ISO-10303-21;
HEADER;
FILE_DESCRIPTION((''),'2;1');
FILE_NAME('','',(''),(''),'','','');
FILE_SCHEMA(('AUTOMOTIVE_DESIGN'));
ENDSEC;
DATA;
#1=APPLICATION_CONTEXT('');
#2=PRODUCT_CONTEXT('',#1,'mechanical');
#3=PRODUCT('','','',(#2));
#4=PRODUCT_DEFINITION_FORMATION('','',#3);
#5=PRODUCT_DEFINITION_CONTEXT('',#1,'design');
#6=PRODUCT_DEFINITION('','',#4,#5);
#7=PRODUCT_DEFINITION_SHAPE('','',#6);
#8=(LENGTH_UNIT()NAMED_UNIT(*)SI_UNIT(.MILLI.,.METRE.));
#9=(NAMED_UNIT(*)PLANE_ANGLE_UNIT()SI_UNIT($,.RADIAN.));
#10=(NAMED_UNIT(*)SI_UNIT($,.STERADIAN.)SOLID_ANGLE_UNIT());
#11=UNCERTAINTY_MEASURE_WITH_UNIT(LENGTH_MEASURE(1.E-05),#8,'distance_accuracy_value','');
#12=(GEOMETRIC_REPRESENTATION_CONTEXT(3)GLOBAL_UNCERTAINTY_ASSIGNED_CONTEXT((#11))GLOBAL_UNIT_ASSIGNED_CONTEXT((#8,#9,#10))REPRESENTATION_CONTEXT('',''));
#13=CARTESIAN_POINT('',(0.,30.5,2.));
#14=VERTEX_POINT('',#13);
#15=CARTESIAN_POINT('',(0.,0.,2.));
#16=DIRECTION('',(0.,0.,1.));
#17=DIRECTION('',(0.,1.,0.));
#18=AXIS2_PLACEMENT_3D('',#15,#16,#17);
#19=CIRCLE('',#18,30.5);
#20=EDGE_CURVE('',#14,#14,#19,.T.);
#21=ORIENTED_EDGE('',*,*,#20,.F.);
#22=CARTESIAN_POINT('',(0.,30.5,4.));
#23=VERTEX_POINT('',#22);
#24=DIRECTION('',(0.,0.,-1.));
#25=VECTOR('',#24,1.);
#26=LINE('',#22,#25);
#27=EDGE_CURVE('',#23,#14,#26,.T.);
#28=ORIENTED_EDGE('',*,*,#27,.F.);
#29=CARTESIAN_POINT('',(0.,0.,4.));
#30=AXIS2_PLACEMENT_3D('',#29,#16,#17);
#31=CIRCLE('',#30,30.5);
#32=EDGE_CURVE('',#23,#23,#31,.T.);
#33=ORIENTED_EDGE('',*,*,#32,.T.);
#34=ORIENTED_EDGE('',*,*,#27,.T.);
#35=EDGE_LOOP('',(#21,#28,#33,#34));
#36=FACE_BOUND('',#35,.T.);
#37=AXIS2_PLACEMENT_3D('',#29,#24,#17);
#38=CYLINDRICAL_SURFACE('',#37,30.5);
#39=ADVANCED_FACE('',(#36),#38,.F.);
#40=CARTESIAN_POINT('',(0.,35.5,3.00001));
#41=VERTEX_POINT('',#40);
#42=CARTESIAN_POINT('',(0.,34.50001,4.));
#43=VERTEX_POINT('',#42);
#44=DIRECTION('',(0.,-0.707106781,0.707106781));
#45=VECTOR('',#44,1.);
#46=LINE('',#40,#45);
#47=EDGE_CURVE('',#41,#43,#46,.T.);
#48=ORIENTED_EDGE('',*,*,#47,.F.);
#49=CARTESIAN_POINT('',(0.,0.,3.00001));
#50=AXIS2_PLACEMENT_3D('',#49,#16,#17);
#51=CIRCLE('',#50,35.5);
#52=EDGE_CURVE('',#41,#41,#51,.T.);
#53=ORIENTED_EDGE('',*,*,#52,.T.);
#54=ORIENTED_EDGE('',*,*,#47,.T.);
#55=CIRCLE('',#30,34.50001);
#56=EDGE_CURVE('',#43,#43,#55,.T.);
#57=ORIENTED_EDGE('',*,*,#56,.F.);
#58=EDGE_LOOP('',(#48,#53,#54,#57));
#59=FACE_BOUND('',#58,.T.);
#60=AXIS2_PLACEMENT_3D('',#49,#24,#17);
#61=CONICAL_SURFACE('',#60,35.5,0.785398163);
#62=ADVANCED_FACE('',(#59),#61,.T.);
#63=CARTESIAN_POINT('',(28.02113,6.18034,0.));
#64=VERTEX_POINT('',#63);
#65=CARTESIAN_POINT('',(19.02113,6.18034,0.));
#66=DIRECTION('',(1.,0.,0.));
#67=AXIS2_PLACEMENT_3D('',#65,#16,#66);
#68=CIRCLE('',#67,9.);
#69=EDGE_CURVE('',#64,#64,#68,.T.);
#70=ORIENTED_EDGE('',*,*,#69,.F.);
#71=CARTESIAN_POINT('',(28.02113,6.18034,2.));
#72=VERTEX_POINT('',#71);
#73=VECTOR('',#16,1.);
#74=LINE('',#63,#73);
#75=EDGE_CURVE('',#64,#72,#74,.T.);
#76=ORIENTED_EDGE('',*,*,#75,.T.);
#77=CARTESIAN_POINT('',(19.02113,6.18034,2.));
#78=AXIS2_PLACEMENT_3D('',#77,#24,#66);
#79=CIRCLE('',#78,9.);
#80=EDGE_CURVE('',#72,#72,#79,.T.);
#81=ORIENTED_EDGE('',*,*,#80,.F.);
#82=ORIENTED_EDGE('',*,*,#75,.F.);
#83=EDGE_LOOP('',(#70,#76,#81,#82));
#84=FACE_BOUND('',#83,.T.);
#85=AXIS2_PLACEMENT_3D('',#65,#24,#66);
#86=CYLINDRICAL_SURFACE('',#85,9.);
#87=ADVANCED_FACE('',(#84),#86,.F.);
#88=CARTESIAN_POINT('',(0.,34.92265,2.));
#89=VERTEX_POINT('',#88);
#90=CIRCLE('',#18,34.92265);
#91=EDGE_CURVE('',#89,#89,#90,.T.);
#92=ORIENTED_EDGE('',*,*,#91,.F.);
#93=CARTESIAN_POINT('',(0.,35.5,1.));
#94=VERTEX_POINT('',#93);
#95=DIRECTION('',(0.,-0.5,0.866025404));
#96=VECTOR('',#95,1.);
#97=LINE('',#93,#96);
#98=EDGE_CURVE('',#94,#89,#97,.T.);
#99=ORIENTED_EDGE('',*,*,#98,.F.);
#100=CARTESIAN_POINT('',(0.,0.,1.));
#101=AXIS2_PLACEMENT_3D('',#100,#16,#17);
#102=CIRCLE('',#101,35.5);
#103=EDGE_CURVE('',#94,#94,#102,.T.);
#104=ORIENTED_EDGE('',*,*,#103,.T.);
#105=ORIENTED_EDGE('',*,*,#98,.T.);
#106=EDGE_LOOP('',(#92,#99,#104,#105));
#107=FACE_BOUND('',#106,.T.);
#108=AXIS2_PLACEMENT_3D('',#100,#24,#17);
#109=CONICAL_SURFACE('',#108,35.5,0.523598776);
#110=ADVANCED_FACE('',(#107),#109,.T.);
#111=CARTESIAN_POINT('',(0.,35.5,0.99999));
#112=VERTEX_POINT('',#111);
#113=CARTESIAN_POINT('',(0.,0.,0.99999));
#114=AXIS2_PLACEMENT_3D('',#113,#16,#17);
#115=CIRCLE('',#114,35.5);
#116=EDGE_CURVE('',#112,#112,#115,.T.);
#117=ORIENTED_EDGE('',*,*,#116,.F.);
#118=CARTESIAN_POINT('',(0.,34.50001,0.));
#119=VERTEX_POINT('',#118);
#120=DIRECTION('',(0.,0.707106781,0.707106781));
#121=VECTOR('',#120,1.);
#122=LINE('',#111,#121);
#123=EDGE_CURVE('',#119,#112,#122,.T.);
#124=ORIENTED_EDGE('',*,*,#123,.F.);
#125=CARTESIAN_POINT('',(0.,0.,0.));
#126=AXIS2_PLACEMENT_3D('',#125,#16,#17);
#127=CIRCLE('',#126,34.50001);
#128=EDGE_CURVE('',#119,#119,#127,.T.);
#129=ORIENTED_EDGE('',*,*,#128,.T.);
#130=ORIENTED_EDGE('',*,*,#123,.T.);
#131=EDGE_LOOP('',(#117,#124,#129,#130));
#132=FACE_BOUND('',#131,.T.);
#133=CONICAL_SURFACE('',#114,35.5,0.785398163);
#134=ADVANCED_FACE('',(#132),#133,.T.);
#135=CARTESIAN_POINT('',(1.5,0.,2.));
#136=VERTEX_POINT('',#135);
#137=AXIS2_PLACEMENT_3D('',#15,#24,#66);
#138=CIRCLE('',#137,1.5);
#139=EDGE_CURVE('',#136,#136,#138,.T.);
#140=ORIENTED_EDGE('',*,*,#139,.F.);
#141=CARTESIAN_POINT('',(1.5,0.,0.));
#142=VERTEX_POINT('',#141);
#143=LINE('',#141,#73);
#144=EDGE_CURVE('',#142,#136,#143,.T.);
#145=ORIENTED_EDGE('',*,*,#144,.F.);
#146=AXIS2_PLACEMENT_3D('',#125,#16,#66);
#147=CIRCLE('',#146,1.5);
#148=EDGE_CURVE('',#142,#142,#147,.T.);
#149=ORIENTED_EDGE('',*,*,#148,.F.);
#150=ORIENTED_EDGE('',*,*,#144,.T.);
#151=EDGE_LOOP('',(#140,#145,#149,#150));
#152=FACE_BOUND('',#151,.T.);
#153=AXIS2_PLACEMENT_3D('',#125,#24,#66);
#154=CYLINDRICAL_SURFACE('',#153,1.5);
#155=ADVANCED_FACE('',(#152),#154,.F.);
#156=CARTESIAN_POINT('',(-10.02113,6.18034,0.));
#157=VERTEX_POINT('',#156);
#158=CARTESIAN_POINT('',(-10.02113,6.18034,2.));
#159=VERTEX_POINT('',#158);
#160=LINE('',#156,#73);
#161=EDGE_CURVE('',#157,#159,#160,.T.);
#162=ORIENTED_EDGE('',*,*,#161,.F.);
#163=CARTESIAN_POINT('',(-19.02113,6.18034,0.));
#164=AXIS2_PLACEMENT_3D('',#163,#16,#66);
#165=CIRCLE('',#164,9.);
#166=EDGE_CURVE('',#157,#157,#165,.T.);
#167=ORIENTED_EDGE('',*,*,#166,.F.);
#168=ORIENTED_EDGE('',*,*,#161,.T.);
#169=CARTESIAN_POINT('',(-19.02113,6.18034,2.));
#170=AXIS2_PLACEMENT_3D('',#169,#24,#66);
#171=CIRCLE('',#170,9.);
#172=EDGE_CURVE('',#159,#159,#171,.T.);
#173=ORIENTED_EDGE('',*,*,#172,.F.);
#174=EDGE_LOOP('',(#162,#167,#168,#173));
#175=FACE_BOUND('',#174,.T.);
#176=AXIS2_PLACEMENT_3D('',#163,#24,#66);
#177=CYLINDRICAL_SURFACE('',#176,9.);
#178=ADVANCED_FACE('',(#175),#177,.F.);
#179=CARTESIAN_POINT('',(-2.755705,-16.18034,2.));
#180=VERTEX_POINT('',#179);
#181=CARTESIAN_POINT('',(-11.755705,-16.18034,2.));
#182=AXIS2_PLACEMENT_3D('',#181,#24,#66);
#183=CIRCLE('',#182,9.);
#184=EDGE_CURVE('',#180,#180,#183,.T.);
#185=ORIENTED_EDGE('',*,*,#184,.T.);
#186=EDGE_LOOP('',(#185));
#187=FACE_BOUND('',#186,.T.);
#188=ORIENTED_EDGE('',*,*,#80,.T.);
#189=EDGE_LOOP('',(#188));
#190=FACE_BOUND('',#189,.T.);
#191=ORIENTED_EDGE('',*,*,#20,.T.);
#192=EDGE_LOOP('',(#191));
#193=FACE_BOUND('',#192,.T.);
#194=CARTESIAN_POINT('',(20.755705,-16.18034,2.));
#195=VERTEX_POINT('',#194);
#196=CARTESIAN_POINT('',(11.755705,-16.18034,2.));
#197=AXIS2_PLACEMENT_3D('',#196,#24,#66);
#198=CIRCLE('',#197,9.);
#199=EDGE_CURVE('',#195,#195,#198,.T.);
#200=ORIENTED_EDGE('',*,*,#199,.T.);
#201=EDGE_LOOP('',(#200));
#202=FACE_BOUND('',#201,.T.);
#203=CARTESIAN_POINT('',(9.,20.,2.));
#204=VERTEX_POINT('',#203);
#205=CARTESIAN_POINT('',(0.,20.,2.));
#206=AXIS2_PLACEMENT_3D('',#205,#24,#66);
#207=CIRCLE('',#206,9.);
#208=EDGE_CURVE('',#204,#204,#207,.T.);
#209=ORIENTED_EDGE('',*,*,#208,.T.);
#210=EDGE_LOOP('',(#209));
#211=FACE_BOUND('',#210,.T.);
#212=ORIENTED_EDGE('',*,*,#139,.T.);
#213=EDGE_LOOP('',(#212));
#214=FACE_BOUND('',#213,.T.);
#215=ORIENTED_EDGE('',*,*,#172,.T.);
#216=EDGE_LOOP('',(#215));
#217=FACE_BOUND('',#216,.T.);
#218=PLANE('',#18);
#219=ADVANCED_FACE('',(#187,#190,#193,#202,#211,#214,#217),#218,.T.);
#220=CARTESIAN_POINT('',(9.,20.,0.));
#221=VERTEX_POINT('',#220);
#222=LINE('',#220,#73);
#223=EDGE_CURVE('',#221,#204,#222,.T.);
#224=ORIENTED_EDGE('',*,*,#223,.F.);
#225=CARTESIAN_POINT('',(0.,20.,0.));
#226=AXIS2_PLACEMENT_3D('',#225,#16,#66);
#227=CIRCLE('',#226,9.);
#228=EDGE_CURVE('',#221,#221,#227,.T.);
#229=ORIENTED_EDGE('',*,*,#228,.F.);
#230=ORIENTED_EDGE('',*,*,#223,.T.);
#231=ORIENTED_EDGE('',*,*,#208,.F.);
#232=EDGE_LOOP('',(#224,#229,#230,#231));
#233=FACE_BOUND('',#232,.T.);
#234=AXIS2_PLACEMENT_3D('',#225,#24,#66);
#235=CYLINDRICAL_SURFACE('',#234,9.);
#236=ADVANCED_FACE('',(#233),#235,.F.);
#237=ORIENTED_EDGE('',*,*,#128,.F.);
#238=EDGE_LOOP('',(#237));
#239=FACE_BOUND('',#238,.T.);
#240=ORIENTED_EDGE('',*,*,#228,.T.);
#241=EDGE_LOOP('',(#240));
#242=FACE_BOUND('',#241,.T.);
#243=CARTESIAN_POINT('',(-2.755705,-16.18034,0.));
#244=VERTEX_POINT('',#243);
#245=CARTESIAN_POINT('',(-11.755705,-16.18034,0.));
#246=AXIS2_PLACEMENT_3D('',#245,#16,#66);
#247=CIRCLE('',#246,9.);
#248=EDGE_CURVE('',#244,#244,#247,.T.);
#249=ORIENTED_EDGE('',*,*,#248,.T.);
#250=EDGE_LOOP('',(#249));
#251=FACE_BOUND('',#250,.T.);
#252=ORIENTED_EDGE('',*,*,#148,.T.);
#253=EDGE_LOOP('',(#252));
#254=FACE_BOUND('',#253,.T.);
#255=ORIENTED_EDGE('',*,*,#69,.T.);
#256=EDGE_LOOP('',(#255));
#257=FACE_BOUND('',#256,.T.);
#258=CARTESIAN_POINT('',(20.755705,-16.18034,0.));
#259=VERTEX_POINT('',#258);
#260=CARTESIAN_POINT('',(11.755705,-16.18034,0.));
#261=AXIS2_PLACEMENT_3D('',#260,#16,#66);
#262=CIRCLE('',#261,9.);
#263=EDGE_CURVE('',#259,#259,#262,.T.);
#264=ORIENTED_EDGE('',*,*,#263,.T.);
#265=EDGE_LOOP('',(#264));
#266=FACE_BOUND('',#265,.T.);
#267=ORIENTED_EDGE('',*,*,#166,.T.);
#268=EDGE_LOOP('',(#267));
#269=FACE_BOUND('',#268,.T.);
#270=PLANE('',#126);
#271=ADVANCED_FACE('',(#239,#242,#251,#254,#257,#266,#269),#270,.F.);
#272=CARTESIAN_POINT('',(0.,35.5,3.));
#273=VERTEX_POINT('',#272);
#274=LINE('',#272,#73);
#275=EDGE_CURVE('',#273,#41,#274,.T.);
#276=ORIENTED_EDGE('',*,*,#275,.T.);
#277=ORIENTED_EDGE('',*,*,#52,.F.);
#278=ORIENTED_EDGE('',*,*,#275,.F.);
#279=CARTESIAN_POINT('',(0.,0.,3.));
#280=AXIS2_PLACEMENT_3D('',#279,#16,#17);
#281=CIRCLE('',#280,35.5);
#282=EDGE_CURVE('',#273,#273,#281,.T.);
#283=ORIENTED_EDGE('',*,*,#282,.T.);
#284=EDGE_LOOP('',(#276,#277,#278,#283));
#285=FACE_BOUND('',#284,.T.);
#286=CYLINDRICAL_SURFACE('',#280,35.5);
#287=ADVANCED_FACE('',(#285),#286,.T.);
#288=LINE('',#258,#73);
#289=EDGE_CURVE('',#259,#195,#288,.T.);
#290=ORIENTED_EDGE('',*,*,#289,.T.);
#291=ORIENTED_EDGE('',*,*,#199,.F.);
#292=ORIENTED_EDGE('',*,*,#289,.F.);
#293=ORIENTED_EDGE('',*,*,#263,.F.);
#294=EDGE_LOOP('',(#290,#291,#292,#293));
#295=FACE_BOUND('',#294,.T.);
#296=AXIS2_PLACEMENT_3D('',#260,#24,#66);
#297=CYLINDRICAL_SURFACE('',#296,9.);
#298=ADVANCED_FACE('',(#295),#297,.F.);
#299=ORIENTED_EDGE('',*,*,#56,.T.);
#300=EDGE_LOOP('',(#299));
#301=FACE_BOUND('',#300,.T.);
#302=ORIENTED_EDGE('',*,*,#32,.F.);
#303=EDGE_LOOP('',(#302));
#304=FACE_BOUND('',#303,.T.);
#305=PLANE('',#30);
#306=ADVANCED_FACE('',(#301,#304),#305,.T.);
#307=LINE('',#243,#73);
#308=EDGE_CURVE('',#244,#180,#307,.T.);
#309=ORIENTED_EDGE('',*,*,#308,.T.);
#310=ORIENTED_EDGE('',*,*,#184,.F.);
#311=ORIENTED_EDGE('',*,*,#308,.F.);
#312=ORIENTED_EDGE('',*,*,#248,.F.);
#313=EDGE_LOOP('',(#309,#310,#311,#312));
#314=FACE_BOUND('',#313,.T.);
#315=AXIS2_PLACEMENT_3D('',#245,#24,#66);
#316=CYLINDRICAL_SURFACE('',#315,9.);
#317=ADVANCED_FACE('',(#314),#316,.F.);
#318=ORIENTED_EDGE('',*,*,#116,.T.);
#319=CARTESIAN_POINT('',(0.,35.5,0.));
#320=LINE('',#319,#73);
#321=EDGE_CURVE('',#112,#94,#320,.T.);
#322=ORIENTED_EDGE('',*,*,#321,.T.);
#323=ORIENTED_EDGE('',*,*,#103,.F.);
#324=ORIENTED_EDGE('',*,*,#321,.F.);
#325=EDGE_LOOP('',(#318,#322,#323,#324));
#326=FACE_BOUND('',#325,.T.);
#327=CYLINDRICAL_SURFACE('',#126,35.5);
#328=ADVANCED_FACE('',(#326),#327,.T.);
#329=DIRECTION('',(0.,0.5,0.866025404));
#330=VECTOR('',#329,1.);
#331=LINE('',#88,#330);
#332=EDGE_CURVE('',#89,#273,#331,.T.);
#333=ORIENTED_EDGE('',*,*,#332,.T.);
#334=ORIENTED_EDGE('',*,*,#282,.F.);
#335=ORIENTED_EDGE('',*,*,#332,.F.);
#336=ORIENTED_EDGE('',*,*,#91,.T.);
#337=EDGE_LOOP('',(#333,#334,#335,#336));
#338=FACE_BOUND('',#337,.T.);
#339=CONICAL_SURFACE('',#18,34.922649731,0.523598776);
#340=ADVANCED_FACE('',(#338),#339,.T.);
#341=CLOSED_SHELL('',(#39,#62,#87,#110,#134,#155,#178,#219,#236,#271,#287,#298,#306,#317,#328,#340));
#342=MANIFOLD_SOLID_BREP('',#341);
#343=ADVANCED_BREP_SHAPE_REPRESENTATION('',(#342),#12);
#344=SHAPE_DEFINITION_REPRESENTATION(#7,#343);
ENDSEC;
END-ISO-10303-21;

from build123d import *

# Parameters (mm, degrees)
F0_R     = 9
F0_R_2   = 1.5
F3_DEPTH = 25
F4_SIZE  = 0.99999


# Not quite as in the source:
# - a fillet or chamfer is up to 0.001 mm smaller than in the source, because OpenCascade refuses the exact size


with BuildPart() as f2:
    # F1 (on Right) → F2 (revolve)
    with BuildSketch(Plane.YZ):
        Polygon((0, 2), (0, 0), (35.5, 0), (35.5, 1), (34.9226497308, 2), (35.5, 3), (35.5, 4), (30.5, 4), (30.5, 2), align=None)
    revolve(axis=Axis((0, 0, 11.7082232609), (0, 0, 1)))

    # F0 (on Top) → F3 (cut)
    with BuildSketch(Plane.XY):
        with Locations((11.7557050458, -16.1803398875)):
            Circle(F0_R)
        with Locations((-11.7557050458, -16.1803398875)):
            Circle(F0_R)
        with Locations((-19.0211303259, 6.1803398875)):
            Circle(F0_R)
        with Locations((0, 20)):
            Circle(F0_R)
        with Locations((19.0211303259, 6.1803398875)):
            Circle(F0_R)
        Circle(F0_R_2)
    extrude(amount=F3_DEPTH, mode=Mode.SUBTRACT)

    # F4 (size 1 in the source; OpenCascade refuses exactly that, so slightly less here)
    f4_edges = [f2.edges().sort_by_distance(p)[0] for p in [
        (0, -35.5, 4),
        (0, -35.5, 0),
    ]]
    chamfer(f4_edges, length=F4_SIZE)


solid = f2.part
